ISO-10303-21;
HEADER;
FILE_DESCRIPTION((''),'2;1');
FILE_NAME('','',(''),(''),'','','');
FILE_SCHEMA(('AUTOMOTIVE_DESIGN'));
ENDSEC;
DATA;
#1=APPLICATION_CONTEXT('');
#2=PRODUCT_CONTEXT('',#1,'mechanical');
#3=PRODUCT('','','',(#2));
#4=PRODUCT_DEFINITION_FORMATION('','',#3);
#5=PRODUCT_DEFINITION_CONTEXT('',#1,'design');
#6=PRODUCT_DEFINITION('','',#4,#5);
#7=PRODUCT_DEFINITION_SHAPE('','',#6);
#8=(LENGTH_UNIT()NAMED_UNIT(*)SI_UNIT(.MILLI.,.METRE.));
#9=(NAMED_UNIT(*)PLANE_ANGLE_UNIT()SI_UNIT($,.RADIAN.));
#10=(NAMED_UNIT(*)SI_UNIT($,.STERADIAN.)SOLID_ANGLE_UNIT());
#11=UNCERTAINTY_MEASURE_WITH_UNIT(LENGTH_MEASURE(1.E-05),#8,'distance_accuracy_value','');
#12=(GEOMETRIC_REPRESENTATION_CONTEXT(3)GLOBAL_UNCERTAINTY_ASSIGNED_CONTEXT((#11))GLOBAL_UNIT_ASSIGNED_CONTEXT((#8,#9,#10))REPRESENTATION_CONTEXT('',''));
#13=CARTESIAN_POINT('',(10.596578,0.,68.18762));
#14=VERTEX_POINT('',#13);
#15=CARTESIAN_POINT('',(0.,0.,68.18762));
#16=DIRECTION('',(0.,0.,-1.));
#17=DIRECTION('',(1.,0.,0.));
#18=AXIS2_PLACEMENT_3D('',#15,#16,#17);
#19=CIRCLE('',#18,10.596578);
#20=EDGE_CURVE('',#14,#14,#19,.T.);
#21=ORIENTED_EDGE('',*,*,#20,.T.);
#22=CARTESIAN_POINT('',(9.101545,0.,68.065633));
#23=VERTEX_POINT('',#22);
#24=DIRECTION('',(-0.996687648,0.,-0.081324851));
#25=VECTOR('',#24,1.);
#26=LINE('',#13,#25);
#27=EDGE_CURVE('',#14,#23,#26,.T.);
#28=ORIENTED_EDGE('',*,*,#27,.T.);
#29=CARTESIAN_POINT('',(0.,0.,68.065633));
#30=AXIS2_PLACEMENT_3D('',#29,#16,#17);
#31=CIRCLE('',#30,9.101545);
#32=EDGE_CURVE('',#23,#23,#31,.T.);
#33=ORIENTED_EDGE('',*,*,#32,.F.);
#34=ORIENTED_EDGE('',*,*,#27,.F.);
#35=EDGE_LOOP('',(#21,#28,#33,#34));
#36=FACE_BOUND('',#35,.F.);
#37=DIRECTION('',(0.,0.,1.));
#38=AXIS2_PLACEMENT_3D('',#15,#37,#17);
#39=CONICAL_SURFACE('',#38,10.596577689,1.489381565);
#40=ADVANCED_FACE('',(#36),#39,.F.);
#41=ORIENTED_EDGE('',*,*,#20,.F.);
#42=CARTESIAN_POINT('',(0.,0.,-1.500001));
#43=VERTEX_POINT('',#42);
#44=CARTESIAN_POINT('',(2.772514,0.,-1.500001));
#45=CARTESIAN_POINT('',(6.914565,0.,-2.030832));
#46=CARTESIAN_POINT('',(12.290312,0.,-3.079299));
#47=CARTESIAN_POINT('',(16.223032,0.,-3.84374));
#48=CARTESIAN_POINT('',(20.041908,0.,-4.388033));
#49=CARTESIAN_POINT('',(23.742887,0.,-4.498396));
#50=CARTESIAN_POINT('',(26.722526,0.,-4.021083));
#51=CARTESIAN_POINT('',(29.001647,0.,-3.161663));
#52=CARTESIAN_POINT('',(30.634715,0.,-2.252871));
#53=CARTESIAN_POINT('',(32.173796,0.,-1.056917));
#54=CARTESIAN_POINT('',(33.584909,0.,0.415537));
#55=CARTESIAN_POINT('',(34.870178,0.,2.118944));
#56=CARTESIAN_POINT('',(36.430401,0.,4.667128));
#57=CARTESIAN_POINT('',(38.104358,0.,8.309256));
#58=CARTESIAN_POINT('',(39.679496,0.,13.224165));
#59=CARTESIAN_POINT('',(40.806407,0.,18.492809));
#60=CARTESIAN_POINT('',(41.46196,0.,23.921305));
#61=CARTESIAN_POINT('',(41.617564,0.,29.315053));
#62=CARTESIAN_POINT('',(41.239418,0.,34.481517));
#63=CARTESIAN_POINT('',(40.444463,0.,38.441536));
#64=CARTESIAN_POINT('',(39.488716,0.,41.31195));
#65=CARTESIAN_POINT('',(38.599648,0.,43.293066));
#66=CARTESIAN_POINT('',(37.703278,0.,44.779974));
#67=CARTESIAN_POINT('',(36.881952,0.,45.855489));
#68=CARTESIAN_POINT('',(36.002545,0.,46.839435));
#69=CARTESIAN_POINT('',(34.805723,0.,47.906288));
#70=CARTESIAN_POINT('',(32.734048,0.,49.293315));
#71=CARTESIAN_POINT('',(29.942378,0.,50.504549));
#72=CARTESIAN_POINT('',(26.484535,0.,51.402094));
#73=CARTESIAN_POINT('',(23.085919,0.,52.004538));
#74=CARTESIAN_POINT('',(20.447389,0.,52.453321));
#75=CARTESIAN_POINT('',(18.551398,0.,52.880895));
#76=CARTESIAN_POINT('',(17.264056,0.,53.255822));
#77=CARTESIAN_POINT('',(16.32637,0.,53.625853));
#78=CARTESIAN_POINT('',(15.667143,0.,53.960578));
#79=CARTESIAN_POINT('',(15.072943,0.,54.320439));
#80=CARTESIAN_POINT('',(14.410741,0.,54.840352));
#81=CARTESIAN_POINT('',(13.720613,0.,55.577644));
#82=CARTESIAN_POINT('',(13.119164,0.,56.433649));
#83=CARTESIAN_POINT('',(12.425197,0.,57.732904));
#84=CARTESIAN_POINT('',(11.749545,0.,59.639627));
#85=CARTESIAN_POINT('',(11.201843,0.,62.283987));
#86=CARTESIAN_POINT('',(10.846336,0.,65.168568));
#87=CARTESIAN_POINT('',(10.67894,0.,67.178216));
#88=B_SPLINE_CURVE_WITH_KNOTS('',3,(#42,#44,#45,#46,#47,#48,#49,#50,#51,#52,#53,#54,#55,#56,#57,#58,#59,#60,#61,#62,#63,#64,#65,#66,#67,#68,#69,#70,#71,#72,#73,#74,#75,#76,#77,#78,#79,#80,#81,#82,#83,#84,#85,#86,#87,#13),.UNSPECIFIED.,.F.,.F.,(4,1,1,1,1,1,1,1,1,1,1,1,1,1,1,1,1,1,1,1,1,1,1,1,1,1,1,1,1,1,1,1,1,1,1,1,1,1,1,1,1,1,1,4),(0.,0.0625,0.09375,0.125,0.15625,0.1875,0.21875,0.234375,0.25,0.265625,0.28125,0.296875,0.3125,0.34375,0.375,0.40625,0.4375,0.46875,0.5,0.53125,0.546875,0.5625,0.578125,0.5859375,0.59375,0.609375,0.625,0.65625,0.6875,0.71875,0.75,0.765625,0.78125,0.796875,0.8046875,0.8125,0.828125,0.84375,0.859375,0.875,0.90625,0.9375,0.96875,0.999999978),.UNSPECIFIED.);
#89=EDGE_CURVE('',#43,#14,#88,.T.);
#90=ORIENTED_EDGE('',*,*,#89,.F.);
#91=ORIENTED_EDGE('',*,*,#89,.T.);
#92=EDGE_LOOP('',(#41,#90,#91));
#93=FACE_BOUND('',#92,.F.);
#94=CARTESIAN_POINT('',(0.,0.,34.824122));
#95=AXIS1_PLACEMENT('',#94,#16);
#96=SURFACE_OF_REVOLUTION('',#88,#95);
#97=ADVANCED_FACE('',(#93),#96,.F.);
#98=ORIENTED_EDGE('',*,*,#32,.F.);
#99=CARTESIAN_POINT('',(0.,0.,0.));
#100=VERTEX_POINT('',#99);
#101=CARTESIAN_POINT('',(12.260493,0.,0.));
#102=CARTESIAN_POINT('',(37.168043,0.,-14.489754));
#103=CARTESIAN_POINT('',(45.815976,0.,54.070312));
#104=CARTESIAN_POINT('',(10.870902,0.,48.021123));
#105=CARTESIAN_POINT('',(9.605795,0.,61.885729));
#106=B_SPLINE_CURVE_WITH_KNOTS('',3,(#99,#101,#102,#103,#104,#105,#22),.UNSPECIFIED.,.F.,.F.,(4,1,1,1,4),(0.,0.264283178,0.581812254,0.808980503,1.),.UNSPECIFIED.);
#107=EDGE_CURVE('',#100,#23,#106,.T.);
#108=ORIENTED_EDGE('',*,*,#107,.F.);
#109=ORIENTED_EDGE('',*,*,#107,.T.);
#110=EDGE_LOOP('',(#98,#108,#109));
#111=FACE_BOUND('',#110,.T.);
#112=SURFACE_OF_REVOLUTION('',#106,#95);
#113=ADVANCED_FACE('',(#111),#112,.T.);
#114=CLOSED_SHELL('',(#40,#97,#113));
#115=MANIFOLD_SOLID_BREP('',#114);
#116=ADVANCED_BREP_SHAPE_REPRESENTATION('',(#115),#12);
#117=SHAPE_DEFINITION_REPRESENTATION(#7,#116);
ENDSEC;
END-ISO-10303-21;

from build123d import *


# Not quite as in the source:
# - ends of sketch curves that miss each other by under 0.0002 mm in the source are joined
# - the dataset's text gives a spline's control points without its knots; the knots are read off the source's solid


with BuildPart() as f1:
    # F0 (on Front) → F1 (revolve)
    with BuildSketch(Plane.XZ):
        with BuildLine():
            add(Edge.make_bspline(
                [(0, 0), (12.2604930092, 0), (37.1680432505, -14.4897537862), (45.8159764504, 54.0703124701), (10.8709015607, 48.0211229848), (9.6057950827, 61.8857288852), (9.1015450487, 68.0656330135)],
                knots=[0, 0, 0, 0, 0.2642831779, 0.5818122538, 0.8089805027, 1, 1, 1, 1], degree=3))
            Line((0, 0), (0, -1.5000011719))
            add(Edge.make_bspline(
                [(0, -1.5000011719), (2.7725135208, -1.5000011719), (6.9145647776, -2.0308322394), (12.2903121109, -3.0792987233), (16.2230322301, -3.8437402004), (20.0419075684, -4.3880328646), (23.7428872911, -4.4983960181), (26.7225260222, -4.0210829824), (29.0016471213, -3.1616629238), (30.634715187, -2.2528712489), (32.1737960375, -1.0569174337), (33.5849093089, 0.4155370165), (34.8701777039, 2.1189441775), (36.4304008936, 4.6671279697), (38.1043575198, 8.3092557489), (39.6794960387, 13.2241653972), (40.8064070385, 18.4928093913), (41.4619597155, 23.9213048617), (41.6175636543, 29.3150527243), (41.2394176043, 34.481517293), (40.4444625408, 38.4415356728), (39.4887157156, 41.3119500081), (38.5996476038, 43.2930657424), (37.7032781151, 44.7799744639), (36.8819518489, 45.8554891408), (36.0025448677, 46.8394346131), (34.8057228996, 47.9062881725), (32.7340480289, 49.2933149411), (29.9423777814, 50.5045494733), (26.4845353427, 51.4020936649), (23.0859185409, 52.0045383585), (20.4473888451, 52.4533214053), (18.5513975566, 52.8808949316), (17.2640557934, 53.2558221623), (16.3263698889, 53.6258531422), (15.667143184, 53.9605779715), (15.0729428605, 54.3204393179), (14.4107406838, 54.8403517171), (13.7206126643, 55.5776441057), (13.1191641344, 56.4336487659), (12.4251973264, 57.7329037553), (11.7495447876, 59.6396265655), (11.2018431492, 62.2839868191), (10.8463357644, 65.168567942), (10.6789401827, 67.1782157689), (10.5965776894, 68.1876203849)],
                knots=[0, 0, 0, 0, 0.0625, 0.09375, 0.125, 0.15625, 0.1875, 0.21875, 0.234375, 0.25, 0.265625, 0.28125, 0.296875, 0.3125, 0.34375, 0.375, 0.40625, 0.4375, 0.46875, 0.5, 0.53125, 0.546875, 0.5625, 0.578125, 0.5859375, 0.59375, 0.609375, 0.625, 0.65625, 0.6875, 0.71875, 0.75, 0.765625, 0.78125, 0.796875, 0.8046875, 0.8125, 0.828125, 0.84375, 0.859375, 0.875, 0.90625, 0.9375, 0.96875, 0.9999999783, 0.9999999783, 0.9999999783, 0.9999999783], degree=3))
            Line((10.5965776894, 68.1876203849), (9.1015450487, 68.0656330135))
        make_face()
    revolve(axis=Axis((0, 0, 34.8241217434), (0, 0, -1)))


solid = f1.part
